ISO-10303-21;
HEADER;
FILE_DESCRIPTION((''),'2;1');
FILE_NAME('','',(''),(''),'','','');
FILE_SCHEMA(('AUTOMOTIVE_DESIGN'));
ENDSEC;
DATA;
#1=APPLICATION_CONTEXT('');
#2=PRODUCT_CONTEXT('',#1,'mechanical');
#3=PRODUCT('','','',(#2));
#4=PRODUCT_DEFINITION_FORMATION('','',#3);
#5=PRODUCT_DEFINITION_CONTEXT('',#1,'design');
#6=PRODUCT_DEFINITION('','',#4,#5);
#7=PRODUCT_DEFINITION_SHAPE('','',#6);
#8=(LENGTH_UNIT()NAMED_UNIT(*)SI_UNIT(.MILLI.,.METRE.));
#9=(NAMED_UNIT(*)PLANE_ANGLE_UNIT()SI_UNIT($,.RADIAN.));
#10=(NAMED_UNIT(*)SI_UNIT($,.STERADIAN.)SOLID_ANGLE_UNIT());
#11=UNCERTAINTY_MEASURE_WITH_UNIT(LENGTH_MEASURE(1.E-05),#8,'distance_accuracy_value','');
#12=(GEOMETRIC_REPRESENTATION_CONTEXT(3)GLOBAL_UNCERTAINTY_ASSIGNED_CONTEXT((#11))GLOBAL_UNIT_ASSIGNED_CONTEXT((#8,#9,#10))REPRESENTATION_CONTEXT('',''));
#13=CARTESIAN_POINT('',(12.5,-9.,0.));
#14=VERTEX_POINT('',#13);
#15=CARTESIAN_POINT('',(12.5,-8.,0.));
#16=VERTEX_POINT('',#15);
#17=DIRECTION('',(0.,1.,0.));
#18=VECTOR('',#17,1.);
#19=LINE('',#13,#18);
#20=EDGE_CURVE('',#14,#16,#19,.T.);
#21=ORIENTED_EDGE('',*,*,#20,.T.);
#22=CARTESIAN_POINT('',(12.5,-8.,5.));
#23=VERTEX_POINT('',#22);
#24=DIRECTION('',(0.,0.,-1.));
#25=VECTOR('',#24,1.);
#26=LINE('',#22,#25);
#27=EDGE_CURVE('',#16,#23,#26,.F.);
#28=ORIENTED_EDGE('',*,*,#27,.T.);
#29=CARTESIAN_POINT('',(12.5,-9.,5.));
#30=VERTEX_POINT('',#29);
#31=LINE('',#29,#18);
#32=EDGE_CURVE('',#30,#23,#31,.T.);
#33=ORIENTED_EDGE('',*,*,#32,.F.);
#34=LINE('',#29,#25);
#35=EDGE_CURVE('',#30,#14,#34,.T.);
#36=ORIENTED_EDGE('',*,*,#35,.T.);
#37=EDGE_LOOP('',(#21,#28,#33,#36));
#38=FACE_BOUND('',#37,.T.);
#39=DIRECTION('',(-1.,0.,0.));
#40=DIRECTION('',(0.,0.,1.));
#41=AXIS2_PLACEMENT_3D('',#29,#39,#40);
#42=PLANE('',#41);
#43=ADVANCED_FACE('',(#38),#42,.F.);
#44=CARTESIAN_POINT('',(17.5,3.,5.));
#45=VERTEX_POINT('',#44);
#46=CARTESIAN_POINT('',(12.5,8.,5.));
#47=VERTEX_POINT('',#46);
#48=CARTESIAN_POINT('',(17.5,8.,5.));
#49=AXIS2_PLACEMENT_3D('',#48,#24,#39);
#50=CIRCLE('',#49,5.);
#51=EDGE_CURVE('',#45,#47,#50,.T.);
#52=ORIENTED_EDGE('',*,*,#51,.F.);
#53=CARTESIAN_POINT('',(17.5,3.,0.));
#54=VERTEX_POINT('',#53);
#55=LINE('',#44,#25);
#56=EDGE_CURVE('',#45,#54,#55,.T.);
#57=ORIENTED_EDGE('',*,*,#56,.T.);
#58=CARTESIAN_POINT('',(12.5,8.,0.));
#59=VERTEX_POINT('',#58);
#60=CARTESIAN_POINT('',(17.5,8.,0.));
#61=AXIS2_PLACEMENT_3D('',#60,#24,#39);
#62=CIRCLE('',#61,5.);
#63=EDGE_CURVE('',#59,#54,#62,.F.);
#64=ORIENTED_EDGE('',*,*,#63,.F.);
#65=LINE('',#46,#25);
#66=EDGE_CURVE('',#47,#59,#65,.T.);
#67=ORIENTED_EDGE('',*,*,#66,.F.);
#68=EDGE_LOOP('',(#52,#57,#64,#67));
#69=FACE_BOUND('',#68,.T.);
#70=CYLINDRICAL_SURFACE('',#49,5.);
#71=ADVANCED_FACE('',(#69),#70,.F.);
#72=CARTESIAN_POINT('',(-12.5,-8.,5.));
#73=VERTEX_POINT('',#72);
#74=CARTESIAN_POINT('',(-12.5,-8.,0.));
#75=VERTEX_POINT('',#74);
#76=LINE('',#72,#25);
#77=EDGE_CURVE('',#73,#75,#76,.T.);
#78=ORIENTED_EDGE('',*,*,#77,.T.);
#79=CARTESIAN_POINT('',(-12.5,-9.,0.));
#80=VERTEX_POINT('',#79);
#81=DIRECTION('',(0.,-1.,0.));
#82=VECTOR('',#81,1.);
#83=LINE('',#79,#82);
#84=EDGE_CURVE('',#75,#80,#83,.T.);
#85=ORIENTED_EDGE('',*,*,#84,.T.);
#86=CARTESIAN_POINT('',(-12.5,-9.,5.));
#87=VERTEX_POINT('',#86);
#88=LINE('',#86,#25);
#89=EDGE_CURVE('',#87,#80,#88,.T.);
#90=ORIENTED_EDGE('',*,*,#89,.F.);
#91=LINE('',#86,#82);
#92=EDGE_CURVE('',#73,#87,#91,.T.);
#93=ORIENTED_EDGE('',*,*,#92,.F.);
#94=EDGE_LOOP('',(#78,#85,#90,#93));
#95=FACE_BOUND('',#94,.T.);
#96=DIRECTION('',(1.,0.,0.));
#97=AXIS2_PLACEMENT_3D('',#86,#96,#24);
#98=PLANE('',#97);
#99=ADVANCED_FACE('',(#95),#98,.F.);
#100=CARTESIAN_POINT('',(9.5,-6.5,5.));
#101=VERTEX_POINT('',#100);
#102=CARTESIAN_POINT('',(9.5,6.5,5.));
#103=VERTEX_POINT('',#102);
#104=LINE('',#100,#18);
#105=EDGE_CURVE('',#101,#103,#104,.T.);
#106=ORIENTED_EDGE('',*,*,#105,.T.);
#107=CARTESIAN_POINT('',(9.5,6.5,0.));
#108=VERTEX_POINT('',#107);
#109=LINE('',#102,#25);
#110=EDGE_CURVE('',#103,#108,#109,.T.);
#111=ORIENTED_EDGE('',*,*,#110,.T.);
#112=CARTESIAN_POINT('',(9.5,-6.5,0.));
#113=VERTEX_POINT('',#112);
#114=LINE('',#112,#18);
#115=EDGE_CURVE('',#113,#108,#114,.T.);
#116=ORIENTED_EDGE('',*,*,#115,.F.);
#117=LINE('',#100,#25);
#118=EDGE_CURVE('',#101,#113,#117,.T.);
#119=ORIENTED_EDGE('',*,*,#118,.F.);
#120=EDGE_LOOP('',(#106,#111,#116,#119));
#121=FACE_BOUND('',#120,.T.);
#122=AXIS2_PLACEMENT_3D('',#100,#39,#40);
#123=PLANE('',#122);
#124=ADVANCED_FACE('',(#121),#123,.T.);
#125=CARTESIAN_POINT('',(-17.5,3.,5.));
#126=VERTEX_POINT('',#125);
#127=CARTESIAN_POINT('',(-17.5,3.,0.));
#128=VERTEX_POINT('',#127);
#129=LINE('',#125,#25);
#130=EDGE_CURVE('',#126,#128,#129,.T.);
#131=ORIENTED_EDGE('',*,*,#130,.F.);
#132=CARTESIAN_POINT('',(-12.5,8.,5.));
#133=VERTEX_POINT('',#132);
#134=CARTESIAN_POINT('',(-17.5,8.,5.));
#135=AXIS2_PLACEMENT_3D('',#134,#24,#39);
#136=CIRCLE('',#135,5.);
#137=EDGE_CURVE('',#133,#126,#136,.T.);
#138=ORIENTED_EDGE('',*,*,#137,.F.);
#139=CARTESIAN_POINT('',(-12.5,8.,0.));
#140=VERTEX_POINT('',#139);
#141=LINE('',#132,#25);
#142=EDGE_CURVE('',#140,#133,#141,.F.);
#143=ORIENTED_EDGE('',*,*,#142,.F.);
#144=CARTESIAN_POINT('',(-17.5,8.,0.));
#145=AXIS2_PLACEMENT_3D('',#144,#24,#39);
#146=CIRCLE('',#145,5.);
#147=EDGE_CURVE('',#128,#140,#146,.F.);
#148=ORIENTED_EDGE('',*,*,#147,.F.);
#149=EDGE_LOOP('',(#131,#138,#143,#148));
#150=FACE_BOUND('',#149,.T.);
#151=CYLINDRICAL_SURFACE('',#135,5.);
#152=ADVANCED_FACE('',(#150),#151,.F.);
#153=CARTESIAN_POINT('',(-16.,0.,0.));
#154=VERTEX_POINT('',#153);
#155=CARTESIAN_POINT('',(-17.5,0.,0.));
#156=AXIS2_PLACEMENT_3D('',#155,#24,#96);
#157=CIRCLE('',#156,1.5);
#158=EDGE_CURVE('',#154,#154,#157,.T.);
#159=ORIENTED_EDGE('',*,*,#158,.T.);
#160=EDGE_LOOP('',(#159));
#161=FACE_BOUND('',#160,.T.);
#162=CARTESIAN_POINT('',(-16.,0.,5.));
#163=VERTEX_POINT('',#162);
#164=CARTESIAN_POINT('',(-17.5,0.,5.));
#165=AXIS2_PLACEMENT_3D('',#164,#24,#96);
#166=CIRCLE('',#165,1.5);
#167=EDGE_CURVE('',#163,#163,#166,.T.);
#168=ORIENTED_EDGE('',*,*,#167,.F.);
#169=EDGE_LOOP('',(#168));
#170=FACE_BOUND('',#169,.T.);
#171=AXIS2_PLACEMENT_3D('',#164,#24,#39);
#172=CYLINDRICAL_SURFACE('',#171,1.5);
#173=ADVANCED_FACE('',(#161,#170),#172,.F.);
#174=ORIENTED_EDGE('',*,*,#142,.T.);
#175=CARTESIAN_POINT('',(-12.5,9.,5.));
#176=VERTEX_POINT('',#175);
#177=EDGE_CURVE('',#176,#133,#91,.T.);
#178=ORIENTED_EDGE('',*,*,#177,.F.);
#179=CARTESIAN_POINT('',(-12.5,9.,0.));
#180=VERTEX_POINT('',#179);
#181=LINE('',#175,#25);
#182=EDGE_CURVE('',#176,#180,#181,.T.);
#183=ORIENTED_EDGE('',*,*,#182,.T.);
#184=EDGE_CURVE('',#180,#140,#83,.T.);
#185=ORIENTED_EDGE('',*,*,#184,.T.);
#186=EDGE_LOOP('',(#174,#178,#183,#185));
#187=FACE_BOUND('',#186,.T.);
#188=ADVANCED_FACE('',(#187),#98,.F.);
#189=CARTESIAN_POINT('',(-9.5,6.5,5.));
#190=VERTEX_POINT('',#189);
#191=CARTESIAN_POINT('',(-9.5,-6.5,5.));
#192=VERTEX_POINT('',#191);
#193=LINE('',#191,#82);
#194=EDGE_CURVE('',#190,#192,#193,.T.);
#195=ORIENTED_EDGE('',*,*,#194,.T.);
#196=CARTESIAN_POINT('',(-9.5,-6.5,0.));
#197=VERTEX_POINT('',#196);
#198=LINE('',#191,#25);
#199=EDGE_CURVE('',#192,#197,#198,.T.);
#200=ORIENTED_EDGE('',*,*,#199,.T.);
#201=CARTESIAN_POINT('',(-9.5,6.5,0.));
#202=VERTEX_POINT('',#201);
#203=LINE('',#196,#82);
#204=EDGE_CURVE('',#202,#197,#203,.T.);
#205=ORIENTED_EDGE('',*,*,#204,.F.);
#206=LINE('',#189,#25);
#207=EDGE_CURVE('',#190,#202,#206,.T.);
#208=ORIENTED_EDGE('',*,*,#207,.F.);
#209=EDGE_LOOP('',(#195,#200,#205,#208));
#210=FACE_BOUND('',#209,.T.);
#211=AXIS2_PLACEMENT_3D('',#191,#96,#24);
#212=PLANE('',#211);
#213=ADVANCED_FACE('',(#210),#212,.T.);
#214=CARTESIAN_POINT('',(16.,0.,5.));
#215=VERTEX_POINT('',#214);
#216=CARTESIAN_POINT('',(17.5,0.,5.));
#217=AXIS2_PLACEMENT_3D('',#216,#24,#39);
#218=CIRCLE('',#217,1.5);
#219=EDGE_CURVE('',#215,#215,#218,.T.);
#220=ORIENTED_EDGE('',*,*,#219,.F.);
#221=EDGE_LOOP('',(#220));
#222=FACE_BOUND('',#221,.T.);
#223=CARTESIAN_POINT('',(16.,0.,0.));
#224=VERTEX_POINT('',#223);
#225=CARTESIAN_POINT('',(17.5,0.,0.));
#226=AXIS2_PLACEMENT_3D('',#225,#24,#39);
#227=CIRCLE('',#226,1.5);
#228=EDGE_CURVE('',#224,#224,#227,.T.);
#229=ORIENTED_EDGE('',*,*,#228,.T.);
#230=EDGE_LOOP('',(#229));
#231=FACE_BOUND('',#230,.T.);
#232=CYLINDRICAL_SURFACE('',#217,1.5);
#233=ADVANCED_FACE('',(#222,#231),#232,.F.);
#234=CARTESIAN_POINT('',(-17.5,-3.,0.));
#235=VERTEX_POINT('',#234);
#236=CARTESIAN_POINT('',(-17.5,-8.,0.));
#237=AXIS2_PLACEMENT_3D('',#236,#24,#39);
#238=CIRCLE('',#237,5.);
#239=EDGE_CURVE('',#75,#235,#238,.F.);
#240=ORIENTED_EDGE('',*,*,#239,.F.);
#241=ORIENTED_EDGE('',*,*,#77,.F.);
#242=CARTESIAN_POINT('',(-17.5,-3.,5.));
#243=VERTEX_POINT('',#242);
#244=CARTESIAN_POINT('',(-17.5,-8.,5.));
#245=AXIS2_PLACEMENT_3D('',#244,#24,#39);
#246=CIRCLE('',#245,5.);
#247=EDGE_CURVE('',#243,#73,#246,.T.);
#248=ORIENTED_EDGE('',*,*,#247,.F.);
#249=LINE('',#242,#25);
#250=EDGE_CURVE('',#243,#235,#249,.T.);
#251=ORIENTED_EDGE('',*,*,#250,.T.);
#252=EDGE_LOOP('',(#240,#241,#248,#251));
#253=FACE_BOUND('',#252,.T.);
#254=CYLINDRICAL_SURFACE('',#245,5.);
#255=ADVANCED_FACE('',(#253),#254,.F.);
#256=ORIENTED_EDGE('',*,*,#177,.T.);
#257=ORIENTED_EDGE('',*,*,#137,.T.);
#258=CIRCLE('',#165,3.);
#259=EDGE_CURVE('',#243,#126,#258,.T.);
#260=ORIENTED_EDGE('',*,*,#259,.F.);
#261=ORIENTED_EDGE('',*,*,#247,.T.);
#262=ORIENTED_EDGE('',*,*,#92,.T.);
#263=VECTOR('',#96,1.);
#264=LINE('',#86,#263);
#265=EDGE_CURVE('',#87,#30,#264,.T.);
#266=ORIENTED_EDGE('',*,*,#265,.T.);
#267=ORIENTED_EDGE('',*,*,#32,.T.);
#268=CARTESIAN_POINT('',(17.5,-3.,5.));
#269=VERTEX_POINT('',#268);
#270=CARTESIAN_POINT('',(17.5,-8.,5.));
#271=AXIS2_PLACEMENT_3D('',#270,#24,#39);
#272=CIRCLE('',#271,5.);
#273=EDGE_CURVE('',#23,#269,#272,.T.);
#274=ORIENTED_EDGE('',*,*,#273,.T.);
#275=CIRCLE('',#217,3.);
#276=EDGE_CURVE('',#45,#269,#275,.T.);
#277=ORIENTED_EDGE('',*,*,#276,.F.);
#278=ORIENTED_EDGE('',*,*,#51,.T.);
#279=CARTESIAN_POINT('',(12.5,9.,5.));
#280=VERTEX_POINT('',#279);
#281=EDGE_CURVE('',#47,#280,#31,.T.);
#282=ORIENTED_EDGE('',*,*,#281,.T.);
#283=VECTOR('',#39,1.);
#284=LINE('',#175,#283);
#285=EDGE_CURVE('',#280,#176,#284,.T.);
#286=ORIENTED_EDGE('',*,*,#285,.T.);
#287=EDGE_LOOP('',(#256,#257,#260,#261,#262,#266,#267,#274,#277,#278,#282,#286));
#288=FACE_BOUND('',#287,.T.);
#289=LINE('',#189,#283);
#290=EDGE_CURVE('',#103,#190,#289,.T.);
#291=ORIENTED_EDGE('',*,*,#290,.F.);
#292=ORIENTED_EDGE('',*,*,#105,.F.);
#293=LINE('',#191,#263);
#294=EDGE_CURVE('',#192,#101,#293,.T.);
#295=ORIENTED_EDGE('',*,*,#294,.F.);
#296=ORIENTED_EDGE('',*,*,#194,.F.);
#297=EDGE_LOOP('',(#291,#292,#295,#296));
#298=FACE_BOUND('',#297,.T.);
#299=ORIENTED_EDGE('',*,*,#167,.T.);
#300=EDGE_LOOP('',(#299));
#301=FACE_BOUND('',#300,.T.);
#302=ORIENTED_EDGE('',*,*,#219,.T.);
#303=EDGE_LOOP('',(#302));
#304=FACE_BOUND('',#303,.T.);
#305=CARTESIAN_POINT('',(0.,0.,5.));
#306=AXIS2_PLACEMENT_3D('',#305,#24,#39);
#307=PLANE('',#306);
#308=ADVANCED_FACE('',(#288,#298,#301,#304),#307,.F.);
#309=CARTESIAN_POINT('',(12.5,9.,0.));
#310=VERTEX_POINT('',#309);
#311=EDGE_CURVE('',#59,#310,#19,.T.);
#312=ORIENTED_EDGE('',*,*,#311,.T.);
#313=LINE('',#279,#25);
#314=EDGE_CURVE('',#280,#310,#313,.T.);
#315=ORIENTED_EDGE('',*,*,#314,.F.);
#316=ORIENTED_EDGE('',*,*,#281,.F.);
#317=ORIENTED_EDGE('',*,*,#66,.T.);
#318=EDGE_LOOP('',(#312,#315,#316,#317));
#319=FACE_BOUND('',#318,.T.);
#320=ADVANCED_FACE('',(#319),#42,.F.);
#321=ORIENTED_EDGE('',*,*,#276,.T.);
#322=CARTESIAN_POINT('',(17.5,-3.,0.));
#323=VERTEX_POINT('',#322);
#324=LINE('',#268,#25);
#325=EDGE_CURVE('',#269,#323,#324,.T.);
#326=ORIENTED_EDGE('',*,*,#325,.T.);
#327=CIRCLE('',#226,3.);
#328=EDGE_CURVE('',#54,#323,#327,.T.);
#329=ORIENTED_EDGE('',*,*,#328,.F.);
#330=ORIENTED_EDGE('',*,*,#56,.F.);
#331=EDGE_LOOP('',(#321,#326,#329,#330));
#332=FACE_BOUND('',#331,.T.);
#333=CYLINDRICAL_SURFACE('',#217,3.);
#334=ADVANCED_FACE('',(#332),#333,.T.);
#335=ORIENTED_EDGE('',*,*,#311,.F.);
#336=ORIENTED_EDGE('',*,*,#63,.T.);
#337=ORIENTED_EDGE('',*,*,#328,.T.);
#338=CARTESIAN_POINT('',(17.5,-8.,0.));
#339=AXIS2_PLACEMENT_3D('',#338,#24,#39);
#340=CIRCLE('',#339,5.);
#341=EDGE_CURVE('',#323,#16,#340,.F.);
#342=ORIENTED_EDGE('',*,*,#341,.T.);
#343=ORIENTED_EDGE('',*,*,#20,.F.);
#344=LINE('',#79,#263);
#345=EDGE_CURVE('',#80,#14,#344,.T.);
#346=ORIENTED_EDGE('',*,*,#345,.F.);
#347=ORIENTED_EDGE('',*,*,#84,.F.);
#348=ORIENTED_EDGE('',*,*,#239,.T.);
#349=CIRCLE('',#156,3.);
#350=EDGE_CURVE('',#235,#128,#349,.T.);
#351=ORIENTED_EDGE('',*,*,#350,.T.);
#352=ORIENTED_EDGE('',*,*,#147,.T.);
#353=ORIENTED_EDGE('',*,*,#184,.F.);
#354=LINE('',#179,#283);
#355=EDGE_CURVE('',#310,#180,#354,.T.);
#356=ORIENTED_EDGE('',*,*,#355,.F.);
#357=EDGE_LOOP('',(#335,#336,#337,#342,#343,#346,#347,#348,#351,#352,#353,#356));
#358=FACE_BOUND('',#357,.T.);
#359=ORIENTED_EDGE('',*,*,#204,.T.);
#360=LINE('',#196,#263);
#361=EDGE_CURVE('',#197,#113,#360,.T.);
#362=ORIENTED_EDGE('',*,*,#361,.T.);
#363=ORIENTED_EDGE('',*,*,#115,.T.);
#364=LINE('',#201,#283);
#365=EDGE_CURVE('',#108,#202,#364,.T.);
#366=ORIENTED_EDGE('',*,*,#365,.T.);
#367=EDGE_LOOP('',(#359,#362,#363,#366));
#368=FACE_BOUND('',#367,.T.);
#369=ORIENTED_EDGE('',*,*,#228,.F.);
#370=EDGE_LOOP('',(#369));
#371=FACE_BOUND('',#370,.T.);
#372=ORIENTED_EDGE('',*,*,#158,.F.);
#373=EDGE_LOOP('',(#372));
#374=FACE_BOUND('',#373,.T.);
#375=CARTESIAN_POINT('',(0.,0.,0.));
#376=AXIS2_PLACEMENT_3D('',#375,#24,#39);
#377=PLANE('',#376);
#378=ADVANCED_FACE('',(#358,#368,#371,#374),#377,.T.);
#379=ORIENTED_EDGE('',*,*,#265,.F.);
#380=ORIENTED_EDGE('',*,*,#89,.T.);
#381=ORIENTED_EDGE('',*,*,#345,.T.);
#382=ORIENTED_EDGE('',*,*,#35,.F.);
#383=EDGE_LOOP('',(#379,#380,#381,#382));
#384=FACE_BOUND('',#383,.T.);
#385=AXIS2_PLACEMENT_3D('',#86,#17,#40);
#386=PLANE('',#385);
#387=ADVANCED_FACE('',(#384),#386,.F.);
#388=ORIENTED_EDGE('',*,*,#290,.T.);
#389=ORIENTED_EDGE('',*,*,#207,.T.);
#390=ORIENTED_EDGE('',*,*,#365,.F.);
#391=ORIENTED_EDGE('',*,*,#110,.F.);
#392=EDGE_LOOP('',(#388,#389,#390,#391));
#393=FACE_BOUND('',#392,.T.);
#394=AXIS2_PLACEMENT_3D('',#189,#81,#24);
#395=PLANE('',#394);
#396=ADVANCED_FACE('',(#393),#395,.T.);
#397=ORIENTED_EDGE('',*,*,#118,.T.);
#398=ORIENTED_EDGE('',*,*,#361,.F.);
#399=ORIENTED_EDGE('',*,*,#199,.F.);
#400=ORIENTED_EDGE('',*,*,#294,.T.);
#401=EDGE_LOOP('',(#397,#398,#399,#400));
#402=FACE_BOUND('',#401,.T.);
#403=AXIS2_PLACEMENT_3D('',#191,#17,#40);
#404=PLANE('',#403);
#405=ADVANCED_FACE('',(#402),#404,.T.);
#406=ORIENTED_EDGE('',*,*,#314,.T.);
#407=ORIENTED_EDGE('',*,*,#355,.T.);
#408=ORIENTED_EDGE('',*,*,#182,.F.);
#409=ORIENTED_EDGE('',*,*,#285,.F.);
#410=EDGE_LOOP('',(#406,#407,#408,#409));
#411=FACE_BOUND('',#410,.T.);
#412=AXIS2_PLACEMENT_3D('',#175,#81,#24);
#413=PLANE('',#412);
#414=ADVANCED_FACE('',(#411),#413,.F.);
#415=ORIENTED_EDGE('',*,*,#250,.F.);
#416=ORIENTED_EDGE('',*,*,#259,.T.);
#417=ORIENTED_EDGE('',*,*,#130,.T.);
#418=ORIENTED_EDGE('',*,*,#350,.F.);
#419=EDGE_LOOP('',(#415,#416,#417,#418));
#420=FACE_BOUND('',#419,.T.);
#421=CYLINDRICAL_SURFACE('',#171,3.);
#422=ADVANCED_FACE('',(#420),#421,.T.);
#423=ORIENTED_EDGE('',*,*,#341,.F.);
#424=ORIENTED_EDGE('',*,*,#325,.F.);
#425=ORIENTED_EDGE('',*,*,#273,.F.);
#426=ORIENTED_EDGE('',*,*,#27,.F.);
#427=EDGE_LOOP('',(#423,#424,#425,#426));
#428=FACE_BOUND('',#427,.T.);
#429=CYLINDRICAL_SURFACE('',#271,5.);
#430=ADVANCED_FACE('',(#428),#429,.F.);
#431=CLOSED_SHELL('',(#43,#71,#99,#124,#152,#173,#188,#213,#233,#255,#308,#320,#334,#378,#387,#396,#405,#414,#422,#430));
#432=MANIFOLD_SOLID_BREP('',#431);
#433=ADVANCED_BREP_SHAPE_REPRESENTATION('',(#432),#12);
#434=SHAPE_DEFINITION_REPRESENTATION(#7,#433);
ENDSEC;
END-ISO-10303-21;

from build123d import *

# Parameters (mm, degrees)
SKETCH1_W           = 25
SKETCH1_H           = 18
SKETCH1_W_2         = 19
SKETCH1_H_2         = 13
BOSS_EXTRUDE1_DEPTH = 5
SKETCH2_R           = 1.5
BOSS_EXTRUDE2_DEPTH = 5
FILLET1_R           = 5


with BuildPart() as part:
    # Sketch1 → Boss-Extrude1 (new body)
    with BuildSketch(Plane.XY):
        Rectangle(SKETCH1_W, SKETCH1_H)
        Rectangle(SKETCH1_W_2, SKETCH1_H_2, mode=Mode.SUBTRACT)
    extrude(amount=BOSS_EXTRUDE1_DEPTH)

    # Sketch2 → Boss-Extrude2 (add)
    # profile 1 of 2: a face of its own
    with BuildSketch(Plane(origin=(0, 0, 0), x_dir=(-1, 0, 0), z_dir=(0, 0, -1))):
        with BuildLine():
            Line((-17.5, 3), (-12.5, 3))
            Line((-12.5, 3), (-12.5, -3))
            Line((-12.5, -3), (-17.5, -3))
            ThreePointArc((-17.5, -3), (-20.5, 0), (-17.5, 3))
        make_face()
        with Locations((-17.5, 0)):
            Circle(SKETCH2_R, mode=Mode.SUBTRACT)
    # profile 2 of 2: a face of its own
    with BuildSketch(Plane(origin=(0, 0, 0), x_dir=(-1, 0, 0), z_dir=(0, 0, -1))):
        with BuildLine():
            Line((17.5, 3), (12.5, 3))
            Line((12.5, 3), (12.5, -3))
            Line((12.5, -3), (17.5, -3))
            ThreePointArc((17.5, -3), (20.5, 0), (17.5, 3))
        make_face()
        with Locations(Location((17.5, 0, 0), (0, 0, 180))):
            Circle(SKETCH2_R, mode=Mode.SUBTRACT)
    extrude(amount=-BOSS_EXTRUDE2_DEPTH)

    # Fillet1
    fillet1_edges = [part.edges().sort_by_distance(p)[0] for p in [
        (12.5, -3, 2.5),
        (-12.5, -3, 2.5),
        (-12.5, 3, 2.5),
        (12.5, 3, 2.5),
    ]]
    fillet(fillet1_edges, radius=FILLET1_R - 0.0001)  # a hair under: the kernel refuses the full size


solid = part.part
